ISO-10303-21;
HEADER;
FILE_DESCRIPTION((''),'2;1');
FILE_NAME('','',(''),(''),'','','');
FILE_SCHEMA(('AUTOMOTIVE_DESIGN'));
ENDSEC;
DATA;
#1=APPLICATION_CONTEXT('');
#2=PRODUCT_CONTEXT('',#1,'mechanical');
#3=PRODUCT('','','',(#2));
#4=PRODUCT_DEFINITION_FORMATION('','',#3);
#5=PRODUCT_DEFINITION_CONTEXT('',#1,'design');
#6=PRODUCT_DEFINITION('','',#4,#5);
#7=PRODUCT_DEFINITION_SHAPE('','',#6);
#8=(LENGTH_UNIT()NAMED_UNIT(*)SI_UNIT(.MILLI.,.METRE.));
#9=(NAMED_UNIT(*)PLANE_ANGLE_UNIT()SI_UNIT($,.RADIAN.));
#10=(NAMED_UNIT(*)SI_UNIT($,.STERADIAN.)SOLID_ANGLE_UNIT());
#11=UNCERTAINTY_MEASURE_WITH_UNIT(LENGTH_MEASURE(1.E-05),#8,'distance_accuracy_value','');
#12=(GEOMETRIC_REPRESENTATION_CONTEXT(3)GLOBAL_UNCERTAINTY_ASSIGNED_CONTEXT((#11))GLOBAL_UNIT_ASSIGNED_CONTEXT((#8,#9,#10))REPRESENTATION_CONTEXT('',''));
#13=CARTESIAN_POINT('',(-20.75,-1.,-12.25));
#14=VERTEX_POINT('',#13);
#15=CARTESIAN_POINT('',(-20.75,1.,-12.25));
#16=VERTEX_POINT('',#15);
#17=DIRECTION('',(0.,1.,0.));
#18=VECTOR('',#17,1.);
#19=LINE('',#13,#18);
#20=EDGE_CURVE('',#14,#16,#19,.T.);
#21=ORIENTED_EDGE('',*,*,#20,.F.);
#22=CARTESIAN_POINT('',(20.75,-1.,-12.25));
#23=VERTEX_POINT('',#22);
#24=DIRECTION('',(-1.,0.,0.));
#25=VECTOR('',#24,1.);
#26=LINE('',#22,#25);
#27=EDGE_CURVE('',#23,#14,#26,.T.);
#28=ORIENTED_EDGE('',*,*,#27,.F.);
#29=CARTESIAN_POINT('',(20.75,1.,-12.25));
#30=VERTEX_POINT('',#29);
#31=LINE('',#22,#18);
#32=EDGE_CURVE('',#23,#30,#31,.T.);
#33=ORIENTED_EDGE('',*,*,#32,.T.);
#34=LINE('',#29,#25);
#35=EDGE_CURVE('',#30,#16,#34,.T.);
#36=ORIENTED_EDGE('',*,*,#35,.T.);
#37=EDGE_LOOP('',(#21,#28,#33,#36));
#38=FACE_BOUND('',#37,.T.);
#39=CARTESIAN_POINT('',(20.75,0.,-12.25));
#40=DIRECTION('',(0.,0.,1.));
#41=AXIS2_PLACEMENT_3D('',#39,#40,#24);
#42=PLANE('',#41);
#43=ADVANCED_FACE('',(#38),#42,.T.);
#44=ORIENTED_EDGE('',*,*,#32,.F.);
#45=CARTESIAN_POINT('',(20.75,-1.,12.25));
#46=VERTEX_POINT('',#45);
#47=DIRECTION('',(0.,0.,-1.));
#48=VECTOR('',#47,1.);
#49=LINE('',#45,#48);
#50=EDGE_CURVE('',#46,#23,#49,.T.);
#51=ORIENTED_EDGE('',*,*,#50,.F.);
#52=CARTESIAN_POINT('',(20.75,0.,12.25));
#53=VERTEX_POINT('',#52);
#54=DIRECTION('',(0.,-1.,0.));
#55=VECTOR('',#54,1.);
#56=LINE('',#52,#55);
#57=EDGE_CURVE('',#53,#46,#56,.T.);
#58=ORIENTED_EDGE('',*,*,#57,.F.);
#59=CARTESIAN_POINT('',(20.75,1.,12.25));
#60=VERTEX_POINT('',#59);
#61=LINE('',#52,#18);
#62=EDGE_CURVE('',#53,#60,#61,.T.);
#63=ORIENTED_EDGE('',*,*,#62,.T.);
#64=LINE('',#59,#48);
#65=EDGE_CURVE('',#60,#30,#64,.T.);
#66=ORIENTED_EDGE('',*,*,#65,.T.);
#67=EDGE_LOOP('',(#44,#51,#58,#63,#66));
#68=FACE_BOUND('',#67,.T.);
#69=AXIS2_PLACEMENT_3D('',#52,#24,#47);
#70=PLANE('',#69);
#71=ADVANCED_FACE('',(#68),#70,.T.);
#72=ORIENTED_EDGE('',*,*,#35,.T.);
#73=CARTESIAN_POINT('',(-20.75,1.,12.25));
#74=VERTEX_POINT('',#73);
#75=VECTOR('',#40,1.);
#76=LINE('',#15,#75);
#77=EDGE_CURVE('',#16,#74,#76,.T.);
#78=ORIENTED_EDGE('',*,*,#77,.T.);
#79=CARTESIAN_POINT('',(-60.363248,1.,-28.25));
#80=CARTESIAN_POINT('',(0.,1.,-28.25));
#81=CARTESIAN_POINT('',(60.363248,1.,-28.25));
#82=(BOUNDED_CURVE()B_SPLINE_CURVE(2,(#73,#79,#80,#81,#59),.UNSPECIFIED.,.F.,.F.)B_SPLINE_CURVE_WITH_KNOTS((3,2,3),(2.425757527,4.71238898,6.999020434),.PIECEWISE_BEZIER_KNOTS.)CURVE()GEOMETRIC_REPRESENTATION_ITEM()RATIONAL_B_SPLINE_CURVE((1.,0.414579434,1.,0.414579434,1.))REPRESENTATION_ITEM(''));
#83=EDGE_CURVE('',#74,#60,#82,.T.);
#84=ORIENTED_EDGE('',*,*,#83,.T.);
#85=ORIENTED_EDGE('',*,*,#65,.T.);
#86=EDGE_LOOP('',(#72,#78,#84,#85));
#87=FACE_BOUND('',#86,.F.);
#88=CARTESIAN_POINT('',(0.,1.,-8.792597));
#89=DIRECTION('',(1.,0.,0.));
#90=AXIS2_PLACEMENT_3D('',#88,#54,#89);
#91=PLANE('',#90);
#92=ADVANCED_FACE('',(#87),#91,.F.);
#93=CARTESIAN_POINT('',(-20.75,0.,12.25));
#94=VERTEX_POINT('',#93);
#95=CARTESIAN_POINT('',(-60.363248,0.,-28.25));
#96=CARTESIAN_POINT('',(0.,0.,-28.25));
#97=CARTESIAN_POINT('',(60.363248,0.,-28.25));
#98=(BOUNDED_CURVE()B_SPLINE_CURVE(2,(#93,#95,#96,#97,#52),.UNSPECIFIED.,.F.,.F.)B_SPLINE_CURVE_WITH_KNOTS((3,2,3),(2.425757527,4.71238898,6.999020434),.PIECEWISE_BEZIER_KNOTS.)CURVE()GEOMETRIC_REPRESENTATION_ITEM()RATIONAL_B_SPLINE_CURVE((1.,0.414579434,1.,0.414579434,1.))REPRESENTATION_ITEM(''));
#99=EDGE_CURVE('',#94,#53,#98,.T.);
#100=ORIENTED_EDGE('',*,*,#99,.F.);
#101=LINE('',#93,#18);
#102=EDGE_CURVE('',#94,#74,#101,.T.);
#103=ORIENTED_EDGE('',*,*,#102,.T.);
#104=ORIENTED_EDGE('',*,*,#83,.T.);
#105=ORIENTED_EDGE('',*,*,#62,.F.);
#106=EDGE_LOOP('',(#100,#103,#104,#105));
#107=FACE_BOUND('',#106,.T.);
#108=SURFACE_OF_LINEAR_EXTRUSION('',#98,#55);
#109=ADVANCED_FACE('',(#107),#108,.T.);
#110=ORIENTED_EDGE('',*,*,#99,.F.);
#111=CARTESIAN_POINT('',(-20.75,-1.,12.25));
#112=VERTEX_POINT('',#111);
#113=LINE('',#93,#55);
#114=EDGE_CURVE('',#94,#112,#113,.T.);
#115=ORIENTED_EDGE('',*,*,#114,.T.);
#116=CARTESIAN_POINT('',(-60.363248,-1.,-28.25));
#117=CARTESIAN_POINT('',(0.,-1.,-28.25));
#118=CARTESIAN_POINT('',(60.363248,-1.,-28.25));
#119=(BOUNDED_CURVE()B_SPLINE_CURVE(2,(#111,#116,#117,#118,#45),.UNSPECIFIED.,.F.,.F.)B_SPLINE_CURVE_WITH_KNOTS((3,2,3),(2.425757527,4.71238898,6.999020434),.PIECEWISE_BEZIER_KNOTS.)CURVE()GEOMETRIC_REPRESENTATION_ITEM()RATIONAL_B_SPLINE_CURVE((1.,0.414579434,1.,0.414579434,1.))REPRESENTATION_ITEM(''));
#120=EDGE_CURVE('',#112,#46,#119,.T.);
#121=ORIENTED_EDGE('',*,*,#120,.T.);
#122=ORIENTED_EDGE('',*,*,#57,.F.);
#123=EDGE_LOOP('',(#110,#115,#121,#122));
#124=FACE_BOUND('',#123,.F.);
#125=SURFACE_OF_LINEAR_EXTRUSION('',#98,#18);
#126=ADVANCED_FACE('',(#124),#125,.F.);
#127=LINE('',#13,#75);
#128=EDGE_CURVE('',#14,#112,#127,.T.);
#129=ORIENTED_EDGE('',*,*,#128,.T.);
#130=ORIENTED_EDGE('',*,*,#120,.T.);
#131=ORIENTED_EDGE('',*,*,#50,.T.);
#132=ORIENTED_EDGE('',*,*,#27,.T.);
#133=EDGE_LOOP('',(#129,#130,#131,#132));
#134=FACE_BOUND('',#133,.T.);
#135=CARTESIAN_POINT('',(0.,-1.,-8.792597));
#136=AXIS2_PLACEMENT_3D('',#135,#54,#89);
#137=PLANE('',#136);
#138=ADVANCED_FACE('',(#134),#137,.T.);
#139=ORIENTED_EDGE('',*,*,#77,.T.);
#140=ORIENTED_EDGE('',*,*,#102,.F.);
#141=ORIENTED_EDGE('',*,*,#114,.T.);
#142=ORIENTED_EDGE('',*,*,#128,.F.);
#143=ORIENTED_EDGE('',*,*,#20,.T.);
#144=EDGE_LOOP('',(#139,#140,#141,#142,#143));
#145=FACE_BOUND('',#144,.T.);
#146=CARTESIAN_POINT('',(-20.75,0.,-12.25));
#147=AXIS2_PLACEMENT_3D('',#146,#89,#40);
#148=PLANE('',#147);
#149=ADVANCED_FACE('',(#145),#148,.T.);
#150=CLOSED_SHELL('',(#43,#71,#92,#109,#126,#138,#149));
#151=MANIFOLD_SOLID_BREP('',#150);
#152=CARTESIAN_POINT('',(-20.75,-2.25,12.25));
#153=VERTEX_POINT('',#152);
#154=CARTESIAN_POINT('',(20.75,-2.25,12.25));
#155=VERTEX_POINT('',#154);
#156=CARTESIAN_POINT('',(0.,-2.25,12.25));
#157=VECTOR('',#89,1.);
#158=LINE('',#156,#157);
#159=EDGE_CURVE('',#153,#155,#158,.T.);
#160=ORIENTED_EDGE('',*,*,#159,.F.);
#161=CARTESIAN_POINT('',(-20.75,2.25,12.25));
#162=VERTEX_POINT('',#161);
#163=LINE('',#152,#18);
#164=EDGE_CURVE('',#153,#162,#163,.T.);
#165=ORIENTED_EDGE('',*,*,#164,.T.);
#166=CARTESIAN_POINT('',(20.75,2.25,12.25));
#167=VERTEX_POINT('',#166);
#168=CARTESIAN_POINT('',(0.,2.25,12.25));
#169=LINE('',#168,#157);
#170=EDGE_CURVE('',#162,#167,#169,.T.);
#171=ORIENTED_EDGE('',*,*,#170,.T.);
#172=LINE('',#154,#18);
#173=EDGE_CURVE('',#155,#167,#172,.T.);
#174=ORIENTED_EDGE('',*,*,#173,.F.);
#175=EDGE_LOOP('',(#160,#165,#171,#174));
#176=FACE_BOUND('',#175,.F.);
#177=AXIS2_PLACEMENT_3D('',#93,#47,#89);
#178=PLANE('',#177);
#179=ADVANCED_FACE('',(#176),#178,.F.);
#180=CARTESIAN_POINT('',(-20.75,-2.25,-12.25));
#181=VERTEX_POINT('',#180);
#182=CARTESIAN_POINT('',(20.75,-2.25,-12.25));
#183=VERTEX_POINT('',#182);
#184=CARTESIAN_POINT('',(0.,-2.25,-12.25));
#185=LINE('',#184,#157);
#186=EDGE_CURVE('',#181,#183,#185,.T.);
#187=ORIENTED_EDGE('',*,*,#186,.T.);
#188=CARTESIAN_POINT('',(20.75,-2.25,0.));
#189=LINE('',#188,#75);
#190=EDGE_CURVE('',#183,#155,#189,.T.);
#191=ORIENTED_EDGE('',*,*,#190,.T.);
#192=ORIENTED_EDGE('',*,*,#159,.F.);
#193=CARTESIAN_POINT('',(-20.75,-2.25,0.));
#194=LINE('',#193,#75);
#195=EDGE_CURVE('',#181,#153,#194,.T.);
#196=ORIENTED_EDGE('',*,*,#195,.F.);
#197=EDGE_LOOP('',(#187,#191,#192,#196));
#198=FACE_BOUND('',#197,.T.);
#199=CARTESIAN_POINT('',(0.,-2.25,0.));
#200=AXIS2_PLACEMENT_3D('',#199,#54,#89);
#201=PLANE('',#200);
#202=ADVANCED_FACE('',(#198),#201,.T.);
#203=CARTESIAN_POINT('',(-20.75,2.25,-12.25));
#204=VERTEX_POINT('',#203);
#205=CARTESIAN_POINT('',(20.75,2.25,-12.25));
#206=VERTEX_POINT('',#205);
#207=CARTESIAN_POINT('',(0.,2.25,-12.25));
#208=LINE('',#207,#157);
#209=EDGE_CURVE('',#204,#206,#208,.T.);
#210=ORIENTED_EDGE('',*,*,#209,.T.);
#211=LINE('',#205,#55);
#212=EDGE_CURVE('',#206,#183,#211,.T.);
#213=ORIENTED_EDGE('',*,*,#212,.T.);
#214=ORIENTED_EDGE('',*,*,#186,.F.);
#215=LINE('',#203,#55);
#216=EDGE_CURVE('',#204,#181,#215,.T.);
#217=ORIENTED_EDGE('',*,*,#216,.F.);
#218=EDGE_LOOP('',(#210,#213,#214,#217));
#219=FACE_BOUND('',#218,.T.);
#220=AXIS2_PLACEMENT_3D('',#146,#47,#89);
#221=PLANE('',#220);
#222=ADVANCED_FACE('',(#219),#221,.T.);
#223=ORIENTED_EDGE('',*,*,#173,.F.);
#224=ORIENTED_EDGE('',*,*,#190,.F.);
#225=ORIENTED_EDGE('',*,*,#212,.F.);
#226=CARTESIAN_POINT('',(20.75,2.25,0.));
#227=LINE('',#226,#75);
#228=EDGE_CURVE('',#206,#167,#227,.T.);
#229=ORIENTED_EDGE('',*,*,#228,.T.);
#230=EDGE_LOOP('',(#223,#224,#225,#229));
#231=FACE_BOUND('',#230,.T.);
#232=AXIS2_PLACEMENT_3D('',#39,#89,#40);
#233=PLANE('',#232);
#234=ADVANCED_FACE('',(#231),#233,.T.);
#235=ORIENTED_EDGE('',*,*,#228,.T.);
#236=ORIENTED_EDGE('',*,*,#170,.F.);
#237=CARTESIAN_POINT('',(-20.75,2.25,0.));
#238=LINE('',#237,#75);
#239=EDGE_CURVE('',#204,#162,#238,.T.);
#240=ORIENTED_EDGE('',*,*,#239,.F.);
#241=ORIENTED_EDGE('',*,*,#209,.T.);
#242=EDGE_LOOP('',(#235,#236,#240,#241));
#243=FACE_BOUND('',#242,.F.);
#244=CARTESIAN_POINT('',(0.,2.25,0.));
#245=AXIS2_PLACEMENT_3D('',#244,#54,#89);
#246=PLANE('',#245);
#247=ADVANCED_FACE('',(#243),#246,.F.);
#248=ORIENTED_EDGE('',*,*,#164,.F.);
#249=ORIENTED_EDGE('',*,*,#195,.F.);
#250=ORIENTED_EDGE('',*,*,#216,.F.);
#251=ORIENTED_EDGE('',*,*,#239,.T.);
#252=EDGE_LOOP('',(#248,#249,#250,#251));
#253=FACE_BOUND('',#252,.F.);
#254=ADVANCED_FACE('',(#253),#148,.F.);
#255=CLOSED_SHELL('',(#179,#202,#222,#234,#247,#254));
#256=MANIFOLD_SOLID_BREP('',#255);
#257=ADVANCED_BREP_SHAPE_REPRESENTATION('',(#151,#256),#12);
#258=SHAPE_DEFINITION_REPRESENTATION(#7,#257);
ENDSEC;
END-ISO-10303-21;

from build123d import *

# Parameters (mm, degrees)
F1_W     = 41.5
F1_H     = 24.5
F2_DEPTH = 2.25
F3_DEPTH = 1


with BuildPart() as f2:
    # F1 (on Front) → F2 (new body, symmetric)
    with BuildSketch(Plane.XZ):
        Rectangle(F1_W, F1_H)
    extrude(amount=F2_DEPTH, both=True)


with BuildPart() as f3:
    # F1 (on Front) → F3 (new body, symmetric)
    with BuildSketch(Plane.XZ):
        with BuildLine():
            Line((-20.75, -12.25), (-20.75, 12.25))
            add(Edge.make_bspline(
                [(-20.75, 12.25), (-60.3632476333, -28.25), (0, -28.25), (60.3632476333, -28.25), (20.75, 12.25)],
                knots=[2.4257575272, 2.4257575272, 2.4257575272, 4.7123889804, 4.7123889804, 6.9990204336, 6.9990204336, 6.9990204336], degree=2, weights=[1, 0.4145794337, 1, 0.4145794337, 1]))
            Line((20.75, 12.25), (20.75, -12.25))
            Line((20.75, -12.25), (-20.75, -12.25))
        make_face()
    extrude(amount=F3_DEPTH, both=True)


solid = Compound([f2.part, f3.part])
